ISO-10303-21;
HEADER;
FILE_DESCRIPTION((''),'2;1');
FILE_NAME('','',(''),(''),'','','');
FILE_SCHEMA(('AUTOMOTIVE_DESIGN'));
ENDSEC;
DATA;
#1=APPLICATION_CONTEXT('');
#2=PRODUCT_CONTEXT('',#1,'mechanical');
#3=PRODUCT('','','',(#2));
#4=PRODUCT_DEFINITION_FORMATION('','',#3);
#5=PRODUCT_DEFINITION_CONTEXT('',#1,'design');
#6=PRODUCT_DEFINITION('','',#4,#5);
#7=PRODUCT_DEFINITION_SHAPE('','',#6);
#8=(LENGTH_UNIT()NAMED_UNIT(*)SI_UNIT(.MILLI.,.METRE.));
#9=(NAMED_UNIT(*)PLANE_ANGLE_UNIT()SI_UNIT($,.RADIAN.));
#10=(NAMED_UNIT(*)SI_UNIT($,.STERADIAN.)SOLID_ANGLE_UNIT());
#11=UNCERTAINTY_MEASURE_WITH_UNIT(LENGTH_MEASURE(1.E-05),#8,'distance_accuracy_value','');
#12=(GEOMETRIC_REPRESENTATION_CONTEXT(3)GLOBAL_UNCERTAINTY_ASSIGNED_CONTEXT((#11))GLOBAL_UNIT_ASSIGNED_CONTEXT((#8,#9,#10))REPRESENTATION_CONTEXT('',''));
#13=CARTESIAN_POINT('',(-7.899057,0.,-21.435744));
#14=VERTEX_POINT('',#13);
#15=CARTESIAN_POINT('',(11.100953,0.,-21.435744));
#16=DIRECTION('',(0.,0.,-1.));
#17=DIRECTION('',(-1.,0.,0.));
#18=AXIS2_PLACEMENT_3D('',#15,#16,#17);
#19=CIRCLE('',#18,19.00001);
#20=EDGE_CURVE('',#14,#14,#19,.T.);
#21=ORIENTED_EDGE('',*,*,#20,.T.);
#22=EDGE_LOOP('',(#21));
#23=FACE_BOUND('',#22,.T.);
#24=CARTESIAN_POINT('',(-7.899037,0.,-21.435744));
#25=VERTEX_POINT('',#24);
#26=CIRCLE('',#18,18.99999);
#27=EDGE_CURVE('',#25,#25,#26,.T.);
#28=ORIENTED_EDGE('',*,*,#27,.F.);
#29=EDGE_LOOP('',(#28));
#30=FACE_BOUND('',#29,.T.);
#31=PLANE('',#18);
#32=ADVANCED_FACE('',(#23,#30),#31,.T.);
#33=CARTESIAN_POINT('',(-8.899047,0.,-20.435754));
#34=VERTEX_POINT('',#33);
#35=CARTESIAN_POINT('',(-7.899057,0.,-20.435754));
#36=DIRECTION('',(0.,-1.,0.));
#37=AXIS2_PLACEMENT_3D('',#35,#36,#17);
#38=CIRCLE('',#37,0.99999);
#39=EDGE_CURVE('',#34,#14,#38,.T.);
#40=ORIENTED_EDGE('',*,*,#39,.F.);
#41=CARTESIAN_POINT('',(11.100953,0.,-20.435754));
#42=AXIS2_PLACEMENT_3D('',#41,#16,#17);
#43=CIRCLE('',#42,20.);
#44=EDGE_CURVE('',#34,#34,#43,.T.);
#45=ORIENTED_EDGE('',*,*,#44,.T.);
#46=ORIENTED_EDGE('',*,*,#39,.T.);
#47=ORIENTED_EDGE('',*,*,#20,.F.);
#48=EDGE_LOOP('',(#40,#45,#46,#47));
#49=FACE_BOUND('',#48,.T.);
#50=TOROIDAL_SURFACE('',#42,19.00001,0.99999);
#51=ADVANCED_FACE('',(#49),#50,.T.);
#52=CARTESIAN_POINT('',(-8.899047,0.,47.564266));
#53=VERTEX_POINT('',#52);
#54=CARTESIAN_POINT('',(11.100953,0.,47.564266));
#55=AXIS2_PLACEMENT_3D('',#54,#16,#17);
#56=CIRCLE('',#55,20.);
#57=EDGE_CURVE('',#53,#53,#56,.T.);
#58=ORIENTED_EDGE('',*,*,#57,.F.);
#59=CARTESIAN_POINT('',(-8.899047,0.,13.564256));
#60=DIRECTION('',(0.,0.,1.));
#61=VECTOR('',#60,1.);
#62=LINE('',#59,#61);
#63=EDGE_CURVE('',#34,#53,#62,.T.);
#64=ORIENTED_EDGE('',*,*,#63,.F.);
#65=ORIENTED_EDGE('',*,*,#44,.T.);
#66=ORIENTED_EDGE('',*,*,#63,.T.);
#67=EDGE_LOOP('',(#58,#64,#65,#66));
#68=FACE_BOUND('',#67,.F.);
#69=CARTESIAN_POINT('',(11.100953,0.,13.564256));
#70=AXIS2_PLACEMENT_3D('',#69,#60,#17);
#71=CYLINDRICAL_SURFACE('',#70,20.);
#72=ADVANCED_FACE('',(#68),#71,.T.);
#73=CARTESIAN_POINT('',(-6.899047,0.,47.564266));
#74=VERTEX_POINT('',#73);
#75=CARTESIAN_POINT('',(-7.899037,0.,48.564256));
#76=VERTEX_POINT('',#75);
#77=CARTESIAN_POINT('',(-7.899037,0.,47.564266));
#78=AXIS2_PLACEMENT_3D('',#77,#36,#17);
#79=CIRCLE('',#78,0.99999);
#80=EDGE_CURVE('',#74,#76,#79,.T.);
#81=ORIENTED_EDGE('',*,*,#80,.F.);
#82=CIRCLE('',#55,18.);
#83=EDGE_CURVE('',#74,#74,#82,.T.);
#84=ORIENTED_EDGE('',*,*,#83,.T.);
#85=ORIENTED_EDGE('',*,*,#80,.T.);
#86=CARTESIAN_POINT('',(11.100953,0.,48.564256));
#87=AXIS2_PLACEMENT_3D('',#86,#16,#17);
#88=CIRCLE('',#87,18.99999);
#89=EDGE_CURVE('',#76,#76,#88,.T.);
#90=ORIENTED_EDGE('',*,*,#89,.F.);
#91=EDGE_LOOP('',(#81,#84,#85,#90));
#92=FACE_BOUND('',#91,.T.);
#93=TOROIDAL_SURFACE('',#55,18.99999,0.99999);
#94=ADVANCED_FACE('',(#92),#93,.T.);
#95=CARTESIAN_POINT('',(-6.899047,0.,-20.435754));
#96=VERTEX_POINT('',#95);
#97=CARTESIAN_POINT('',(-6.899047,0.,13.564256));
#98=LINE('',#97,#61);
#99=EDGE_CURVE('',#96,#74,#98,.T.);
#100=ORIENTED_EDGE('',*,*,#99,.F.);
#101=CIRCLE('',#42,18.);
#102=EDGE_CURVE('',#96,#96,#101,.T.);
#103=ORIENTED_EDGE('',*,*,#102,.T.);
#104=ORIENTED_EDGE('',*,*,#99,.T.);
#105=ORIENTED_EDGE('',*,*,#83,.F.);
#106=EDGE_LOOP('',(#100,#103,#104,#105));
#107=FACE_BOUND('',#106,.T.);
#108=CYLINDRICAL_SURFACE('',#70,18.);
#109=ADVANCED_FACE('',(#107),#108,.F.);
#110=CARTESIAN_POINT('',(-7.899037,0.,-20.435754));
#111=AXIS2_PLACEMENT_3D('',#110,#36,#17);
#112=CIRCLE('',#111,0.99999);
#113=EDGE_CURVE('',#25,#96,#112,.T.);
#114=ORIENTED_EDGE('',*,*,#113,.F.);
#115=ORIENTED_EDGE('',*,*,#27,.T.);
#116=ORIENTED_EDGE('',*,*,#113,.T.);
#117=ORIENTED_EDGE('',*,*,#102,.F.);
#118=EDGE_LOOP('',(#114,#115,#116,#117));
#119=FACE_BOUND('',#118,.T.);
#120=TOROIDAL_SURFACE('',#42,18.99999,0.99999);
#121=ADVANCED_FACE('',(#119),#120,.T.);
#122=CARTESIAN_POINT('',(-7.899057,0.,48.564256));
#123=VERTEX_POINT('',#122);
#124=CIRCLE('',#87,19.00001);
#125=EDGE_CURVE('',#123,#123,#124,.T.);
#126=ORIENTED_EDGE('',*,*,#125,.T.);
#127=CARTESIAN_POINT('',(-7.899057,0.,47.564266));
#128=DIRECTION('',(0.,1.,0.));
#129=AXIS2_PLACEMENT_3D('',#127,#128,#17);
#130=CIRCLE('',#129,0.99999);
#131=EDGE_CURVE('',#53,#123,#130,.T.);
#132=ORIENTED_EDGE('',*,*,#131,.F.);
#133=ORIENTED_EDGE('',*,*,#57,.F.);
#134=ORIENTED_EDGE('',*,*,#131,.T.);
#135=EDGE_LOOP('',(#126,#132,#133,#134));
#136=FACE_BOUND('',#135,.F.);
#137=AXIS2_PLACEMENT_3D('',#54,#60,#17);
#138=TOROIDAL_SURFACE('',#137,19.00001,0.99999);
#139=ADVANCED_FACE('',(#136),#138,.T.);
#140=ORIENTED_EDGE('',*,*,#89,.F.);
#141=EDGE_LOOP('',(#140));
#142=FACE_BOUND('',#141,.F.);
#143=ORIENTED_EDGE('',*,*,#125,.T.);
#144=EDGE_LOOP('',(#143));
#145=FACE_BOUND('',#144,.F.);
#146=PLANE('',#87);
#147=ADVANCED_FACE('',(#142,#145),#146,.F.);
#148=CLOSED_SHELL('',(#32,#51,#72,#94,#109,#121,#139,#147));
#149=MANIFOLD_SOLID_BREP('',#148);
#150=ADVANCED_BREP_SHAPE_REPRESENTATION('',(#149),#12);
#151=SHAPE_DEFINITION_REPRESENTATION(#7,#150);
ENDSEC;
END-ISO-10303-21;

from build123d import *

# Parameters (mm, degrees)
F0_W = 2
F0_H = 70
F2_R = 0.99999


# Not quite as in the source:
# - a fillet or chamfer is up to 0.001 mm smaller than in the source, because OpenCascade refuses the exact size


with BuildPart() as f1:
    # F0 (on Front) → F1 (revolve)
    with BuildSketch(Plane.XZ):
        with Locations((-7.899047263, 13.5642557819)):
            Rectangle(F0_W, F0_H)
    revolve(axis=Axis((11.100952737, 0, 13.5642557819), (0, 0, -1)))

    # F2 (radius 1 in the source; OpenCascade refuses exactly that, so slightly less here)
    f2_edges = [f1.edges().sort_by_distance(p)[0] for p in [
        (29.100953, 0, 48.564256),
        (31.100953, 0, 48.564256),
        (31.100953, 0, -21.435744),
        (29.100953, 0, -21.435744),
    ]]
    fillet(f2_edges, radius=F2_R)


solid = f1.part
